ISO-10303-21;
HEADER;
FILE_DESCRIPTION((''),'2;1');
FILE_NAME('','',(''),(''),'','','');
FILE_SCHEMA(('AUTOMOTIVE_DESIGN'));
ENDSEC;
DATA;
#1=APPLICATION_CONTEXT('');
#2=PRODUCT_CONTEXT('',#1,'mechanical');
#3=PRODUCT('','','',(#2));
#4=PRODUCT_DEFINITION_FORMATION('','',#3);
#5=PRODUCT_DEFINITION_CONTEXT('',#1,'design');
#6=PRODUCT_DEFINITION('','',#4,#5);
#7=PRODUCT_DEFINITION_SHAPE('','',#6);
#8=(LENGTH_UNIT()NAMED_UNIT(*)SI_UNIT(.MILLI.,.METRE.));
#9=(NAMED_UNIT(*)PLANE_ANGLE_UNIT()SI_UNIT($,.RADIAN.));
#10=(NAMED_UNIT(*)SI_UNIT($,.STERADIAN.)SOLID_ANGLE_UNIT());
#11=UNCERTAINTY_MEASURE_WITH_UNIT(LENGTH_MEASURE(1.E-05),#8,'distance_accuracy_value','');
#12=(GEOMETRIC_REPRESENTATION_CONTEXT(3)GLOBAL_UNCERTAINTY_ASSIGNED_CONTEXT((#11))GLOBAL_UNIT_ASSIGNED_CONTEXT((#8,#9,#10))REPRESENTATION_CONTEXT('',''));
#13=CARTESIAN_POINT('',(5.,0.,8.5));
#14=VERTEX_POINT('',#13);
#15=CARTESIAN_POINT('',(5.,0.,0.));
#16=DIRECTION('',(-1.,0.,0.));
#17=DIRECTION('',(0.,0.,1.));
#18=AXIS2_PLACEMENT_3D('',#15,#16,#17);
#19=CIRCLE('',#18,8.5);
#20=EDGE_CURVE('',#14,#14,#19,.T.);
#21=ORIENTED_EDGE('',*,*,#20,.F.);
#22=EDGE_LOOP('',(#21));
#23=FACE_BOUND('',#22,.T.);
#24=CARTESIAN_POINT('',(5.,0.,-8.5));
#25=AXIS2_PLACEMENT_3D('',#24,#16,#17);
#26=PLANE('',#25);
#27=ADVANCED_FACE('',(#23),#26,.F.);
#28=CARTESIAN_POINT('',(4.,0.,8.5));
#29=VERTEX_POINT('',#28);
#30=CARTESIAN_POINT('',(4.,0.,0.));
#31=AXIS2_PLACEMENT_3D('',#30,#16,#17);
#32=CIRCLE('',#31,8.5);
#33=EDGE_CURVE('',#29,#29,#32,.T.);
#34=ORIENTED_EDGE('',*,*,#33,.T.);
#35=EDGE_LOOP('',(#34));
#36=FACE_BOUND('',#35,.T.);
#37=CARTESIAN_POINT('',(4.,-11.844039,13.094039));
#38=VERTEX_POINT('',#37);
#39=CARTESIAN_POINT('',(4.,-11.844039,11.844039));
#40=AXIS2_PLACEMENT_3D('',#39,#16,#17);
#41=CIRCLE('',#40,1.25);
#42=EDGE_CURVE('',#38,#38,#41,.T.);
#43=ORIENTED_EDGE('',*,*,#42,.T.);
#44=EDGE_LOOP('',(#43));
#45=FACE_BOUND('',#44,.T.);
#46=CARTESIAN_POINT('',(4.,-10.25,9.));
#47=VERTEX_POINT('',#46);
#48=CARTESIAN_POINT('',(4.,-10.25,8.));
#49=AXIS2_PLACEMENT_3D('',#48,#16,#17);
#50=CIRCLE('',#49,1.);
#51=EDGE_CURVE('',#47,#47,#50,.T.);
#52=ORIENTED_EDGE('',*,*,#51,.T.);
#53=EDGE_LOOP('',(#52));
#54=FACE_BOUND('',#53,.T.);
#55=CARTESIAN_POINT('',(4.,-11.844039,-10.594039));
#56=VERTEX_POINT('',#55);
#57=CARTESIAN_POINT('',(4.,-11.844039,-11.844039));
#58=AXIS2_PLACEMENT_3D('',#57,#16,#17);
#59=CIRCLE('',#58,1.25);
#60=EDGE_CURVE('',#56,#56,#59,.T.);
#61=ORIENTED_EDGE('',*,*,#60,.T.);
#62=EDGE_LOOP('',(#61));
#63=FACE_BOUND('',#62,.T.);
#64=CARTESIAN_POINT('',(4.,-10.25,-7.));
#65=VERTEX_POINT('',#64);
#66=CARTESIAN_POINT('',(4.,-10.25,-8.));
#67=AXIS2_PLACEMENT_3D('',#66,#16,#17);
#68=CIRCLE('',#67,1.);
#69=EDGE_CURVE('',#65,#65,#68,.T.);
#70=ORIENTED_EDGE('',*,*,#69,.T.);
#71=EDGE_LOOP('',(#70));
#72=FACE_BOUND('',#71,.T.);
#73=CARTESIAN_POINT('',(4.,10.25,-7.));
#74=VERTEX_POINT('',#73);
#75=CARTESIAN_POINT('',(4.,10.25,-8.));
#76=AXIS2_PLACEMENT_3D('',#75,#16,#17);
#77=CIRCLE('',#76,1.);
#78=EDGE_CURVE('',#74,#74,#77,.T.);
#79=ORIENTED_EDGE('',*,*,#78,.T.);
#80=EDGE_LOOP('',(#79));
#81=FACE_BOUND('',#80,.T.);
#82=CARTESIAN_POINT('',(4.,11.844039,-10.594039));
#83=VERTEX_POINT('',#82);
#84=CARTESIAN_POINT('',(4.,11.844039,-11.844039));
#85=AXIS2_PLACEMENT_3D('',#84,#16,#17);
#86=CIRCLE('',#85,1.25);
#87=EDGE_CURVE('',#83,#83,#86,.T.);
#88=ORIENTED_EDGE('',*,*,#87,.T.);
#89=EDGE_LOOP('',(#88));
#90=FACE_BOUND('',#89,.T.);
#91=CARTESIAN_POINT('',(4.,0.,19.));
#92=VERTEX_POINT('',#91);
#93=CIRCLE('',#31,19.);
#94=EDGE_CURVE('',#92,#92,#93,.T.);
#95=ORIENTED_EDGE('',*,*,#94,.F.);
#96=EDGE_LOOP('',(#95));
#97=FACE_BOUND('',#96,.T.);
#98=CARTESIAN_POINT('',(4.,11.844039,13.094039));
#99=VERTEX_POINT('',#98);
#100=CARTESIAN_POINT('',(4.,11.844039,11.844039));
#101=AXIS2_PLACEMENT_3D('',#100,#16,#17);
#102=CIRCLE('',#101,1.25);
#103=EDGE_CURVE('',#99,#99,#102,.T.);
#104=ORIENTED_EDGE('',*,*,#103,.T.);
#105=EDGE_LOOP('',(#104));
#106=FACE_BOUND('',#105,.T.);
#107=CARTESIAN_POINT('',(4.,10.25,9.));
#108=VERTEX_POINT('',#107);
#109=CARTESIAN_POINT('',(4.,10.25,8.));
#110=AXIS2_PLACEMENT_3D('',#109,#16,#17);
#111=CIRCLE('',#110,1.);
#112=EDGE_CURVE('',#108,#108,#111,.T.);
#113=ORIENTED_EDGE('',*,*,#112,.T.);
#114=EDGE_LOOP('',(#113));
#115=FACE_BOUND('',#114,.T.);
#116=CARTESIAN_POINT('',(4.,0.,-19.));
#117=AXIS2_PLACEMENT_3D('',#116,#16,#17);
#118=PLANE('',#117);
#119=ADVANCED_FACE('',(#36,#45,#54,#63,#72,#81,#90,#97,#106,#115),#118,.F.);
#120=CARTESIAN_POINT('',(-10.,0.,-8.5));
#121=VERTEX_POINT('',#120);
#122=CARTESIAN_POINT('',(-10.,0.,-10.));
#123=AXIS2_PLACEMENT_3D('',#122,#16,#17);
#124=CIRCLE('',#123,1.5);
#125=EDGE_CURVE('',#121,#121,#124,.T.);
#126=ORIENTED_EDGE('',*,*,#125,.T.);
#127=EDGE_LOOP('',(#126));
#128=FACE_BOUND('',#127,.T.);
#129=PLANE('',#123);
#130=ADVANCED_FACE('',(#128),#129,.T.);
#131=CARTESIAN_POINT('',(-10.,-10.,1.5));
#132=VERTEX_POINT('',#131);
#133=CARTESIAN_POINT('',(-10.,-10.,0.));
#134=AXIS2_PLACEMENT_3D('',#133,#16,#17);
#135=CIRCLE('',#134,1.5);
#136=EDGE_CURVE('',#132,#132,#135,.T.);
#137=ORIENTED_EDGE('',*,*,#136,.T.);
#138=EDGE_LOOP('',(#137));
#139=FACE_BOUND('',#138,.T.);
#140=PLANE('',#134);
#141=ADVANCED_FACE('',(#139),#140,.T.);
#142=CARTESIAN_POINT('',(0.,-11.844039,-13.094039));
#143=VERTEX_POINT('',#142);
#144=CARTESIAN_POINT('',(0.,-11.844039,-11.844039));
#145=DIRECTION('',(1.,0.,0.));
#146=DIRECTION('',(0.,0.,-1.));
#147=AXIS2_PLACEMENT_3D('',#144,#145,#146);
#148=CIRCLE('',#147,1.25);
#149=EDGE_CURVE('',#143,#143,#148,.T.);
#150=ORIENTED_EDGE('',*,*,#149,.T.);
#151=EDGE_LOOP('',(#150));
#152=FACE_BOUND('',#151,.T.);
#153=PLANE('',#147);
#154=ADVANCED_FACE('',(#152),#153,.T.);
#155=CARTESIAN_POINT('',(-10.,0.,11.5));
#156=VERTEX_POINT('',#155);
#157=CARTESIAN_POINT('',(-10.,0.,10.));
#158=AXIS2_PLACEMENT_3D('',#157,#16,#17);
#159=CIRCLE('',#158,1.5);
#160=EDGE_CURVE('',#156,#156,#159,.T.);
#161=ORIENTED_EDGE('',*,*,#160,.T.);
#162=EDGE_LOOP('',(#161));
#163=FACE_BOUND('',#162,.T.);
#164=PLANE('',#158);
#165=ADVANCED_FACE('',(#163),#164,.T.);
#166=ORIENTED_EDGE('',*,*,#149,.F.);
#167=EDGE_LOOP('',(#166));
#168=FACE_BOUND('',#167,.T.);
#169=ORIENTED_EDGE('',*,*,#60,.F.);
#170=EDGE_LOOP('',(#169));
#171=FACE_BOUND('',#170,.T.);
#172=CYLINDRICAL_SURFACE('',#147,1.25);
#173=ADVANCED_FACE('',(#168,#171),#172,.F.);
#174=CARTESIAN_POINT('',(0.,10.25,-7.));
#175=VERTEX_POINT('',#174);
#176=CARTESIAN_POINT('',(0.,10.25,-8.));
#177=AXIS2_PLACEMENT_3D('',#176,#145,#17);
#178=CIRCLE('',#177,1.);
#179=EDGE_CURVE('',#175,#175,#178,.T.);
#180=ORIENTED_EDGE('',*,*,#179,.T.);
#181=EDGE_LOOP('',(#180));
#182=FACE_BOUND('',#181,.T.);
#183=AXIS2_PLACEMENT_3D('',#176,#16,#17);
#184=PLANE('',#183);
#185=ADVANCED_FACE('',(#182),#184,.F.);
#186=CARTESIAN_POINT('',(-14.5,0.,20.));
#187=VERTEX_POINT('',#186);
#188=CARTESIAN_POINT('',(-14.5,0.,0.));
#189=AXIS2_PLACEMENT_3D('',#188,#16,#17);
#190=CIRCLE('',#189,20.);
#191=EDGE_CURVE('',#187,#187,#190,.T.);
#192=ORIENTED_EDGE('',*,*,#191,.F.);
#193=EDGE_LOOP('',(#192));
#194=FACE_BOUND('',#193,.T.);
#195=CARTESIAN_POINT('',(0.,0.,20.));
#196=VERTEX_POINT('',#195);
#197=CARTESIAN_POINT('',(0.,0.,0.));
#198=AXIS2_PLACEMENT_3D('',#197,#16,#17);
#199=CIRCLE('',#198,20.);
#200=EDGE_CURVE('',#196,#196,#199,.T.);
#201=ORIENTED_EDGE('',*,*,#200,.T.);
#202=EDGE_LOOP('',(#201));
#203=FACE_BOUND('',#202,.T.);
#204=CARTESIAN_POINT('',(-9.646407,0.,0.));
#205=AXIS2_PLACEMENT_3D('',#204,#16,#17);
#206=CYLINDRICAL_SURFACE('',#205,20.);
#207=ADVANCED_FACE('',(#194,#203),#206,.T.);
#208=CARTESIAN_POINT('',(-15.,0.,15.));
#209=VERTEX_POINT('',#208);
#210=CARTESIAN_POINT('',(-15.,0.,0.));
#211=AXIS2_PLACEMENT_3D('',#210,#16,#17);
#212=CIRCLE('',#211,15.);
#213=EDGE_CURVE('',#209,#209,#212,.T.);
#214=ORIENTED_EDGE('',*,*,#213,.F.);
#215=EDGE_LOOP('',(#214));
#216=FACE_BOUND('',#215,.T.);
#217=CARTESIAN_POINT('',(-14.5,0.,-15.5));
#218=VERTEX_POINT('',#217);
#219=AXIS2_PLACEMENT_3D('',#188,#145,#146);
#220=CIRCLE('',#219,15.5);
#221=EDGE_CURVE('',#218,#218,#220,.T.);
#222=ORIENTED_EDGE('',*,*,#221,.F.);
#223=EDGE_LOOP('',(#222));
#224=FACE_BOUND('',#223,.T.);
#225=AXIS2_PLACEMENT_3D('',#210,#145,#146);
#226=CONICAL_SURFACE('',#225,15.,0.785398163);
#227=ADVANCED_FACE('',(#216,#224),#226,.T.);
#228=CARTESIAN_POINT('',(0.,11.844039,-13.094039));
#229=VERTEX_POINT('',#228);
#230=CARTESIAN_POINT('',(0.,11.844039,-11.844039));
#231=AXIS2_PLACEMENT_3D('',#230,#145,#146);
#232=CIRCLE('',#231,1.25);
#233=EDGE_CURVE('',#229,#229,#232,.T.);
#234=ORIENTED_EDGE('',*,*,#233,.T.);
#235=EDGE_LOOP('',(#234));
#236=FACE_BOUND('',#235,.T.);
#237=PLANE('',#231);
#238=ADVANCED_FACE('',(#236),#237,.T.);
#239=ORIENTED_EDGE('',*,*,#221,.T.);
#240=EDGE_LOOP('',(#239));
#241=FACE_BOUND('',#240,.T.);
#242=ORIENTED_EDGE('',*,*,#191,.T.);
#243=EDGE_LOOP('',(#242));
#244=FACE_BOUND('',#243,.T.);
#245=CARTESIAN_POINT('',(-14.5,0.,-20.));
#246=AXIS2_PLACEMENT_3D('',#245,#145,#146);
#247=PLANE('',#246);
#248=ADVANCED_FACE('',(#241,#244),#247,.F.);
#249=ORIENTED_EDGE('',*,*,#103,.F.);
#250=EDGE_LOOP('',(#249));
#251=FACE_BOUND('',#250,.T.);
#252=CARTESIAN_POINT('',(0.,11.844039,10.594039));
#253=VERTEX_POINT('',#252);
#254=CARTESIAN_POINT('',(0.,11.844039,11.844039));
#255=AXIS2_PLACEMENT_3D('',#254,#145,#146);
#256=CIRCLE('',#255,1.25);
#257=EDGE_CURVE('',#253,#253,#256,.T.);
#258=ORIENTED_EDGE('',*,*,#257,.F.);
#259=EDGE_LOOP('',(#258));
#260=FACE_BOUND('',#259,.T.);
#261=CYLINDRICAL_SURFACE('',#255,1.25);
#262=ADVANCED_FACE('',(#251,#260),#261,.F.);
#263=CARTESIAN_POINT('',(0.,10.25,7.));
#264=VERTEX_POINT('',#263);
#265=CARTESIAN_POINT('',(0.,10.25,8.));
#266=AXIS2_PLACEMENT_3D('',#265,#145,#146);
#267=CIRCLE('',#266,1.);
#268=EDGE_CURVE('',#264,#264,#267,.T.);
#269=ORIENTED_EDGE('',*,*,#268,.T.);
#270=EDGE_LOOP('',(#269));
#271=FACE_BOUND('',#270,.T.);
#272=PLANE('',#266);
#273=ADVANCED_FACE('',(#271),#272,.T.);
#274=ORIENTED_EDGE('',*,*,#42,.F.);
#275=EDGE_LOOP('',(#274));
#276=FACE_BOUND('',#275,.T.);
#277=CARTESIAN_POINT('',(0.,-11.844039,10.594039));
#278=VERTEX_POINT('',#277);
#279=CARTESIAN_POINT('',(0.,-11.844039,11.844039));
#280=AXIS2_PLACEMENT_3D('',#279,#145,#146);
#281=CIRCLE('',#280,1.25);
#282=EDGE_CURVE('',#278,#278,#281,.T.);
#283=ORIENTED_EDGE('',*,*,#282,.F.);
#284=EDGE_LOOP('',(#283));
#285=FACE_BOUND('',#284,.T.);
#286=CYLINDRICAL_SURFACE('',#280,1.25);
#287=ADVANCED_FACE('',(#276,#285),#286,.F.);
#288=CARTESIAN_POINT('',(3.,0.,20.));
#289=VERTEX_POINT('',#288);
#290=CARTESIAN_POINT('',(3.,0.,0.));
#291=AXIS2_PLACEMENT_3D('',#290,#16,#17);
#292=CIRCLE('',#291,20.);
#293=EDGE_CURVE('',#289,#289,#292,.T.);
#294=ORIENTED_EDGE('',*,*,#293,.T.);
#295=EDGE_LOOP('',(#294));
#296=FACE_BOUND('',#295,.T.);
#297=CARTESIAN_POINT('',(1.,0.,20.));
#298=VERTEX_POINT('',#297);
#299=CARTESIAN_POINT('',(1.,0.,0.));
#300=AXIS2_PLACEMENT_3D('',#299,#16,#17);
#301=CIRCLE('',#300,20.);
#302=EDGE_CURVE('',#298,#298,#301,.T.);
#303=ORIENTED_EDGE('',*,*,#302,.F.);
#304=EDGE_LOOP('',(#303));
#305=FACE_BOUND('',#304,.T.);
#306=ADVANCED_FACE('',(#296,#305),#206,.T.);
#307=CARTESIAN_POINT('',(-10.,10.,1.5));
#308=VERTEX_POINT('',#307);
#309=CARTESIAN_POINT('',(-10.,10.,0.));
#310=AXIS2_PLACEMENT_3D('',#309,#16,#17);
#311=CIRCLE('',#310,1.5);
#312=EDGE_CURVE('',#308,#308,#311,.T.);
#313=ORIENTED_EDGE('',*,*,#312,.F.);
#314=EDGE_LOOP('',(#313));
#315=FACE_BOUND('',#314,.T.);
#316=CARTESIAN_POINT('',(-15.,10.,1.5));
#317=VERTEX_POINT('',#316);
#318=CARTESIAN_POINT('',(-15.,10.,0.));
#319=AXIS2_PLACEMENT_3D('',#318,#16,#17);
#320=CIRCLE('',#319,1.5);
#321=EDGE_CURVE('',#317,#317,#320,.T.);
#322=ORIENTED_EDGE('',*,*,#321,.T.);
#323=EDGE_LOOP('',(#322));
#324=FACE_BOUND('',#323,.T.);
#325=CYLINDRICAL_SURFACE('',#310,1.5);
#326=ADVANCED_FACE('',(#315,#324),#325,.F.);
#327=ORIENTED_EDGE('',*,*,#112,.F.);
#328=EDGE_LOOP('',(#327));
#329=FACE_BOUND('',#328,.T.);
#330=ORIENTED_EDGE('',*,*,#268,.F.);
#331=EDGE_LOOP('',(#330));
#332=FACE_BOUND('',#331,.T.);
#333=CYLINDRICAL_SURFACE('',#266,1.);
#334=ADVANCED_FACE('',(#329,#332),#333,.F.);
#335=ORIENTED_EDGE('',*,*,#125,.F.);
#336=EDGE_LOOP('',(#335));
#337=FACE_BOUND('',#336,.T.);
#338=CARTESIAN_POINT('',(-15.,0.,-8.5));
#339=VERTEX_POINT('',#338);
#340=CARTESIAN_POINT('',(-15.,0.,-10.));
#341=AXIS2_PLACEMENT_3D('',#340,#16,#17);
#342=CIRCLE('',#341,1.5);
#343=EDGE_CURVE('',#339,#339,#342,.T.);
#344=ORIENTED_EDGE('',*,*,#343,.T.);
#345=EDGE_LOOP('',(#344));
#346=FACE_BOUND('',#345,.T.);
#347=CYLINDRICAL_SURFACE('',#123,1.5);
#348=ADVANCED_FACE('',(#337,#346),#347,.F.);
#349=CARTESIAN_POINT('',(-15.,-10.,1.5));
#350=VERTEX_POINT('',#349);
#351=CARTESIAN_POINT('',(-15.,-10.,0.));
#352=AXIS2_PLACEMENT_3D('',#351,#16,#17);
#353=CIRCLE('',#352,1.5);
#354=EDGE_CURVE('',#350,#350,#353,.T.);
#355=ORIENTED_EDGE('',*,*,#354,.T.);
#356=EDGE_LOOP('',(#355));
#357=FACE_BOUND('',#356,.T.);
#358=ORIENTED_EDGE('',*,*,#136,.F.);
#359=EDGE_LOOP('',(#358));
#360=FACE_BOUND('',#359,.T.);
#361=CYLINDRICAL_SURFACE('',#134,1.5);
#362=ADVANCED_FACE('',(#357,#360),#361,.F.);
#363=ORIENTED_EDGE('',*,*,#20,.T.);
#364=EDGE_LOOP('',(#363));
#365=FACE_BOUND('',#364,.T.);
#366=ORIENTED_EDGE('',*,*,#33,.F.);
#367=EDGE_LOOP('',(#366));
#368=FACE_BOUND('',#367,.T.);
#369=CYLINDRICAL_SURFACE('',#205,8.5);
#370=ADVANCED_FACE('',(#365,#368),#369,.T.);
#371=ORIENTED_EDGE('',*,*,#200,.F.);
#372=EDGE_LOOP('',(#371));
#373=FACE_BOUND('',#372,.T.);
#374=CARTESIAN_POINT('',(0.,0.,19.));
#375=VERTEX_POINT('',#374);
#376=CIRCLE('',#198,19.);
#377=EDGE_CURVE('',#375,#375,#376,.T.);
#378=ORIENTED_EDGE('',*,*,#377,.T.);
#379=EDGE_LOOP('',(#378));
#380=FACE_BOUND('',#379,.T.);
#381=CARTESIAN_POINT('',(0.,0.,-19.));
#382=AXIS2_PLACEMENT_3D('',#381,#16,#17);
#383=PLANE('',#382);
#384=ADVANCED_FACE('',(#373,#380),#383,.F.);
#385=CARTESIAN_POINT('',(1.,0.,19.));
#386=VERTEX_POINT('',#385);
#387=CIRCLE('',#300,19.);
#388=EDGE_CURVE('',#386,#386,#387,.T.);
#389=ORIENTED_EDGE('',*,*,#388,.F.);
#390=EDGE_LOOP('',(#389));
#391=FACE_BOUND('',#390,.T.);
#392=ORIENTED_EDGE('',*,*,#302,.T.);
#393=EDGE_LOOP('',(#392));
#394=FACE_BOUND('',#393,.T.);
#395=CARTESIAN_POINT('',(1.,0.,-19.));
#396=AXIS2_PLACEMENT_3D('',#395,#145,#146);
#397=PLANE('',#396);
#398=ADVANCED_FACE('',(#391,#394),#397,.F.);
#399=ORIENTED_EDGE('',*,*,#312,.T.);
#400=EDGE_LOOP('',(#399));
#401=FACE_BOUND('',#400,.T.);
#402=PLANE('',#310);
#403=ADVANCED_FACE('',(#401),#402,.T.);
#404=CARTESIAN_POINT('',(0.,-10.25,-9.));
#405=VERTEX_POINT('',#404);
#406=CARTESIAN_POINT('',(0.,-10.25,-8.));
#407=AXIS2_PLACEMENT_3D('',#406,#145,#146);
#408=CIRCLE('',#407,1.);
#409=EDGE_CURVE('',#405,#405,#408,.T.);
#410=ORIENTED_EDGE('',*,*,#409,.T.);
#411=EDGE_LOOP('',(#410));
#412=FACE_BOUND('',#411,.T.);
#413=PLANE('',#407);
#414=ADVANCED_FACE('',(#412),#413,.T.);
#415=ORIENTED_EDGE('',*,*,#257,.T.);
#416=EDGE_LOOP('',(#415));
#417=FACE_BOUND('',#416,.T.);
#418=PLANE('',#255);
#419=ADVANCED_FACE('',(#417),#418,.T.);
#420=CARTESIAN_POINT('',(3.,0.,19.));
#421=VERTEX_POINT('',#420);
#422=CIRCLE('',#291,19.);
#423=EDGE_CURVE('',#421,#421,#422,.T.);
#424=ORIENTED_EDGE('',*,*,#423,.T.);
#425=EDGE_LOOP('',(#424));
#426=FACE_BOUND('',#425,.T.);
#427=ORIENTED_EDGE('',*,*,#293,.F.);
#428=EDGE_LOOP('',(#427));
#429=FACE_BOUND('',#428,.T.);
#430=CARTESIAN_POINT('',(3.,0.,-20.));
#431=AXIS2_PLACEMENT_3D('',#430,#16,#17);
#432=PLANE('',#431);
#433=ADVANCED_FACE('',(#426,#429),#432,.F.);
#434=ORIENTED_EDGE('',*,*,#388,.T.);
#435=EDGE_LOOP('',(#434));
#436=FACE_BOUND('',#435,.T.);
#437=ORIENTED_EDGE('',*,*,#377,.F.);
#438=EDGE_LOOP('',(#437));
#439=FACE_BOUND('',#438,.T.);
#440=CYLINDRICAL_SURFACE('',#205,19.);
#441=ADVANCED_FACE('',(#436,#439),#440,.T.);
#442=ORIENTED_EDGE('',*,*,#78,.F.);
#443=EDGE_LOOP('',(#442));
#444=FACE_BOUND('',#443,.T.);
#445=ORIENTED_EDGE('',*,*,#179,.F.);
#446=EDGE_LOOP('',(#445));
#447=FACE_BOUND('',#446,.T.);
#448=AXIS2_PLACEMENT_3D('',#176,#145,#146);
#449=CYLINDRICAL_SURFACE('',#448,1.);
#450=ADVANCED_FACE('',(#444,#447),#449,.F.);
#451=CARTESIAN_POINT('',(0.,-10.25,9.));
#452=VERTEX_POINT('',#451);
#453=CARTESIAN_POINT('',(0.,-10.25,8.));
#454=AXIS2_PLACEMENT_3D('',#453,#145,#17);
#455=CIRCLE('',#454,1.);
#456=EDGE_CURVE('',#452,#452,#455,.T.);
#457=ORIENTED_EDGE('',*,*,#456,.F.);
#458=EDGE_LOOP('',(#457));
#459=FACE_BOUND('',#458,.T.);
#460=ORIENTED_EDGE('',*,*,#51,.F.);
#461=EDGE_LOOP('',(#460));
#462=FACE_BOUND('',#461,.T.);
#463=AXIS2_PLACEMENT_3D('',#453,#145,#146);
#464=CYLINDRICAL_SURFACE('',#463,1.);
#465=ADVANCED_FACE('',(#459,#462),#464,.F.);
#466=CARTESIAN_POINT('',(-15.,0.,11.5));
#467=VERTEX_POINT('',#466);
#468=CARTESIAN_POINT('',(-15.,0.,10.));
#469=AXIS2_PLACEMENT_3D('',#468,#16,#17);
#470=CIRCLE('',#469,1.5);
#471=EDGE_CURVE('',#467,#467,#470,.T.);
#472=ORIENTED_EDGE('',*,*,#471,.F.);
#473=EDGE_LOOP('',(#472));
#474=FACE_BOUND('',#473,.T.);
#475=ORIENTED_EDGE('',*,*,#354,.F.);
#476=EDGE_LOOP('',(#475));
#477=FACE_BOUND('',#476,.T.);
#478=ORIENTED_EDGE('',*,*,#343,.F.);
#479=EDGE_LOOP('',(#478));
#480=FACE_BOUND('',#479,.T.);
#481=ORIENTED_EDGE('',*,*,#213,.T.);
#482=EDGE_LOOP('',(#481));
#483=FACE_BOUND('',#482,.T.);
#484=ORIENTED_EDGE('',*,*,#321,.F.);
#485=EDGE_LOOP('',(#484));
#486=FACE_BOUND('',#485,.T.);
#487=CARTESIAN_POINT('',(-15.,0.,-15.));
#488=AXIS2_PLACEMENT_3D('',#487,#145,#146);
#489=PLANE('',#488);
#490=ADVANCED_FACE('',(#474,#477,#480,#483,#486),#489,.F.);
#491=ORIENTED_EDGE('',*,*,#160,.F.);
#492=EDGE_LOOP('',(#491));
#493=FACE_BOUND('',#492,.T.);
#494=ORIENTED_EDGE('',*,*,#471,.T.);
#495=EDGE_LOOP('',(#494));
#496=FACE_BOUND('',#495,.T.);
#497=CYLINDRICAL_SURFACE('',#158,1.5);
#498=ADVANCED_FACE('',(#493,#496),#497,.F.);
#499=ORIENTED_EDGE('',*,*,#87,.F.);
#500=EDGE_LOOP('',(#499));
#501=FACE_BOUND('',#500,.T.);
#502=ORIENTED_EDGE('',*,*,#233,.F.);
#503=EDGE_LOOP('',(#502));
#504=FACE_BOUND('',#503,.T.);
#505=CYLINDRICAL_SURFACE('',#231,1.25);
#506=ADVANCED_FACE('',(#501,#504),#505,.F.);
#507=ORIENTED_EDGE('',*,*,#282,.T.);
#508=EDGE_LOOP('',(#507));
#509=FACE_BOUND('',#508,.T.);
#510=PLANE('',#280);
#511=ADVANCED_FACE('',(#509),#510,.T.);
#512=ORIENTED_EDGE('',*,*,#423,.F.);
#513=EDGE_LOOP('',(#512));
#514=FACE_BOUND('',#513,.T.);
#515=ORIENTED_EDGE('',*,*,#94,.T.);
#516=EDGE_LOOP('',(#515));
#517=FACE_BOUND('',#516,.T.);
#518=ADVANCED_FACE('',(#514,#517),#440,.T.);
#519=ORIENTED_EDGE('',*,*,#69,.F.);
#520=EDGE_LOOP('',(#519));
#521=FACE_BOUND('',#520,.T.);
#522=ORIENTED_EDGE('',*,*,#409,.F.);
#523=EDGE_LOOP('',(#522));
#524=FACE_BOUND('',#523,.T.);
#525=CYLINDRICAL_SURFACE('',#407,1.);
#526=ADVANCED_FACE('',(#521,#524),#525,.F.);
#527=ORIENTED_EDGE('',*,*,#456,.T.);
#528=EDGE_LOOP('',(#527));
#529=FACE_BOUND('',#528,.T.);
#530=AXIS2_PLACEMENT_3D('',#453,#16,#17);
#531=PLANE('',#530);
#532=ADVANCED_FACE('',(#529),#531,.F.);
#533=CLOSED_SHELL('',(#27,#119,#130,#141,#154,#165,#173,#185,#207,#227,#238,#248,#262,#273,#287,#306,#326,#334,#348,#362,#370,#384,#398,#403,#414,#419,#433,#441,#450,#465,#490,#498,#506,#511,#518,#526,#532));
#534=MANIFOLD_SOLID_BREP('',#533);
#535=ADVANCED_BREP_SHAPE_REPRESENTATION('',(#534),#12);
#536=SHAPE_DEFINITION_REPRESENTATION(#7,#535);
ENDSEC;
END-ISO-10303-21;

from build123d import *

# Parameters (mm, degrees)
CHAMFER_1_SIZE      = 0.5
SKETCH_2_R          = 1.5
CUT_EXTRUDE_1_DEPTH = 5
SKETCH_3_R          = 1
SKETCH_3_R_2        = 1.25
CUT_EXTRUDE_2_DEPTH = 5


with BuildPart() as part:
    # 草图1 → 旋转1 (revolve)
    with BuildSketch(Plane(origin=(0, 0, 0), x_dir=(1, 0, 0), z_dir=(0, 1, 0)), mode=Mode.PRIVATE) as revolve_1_sk:
        Polygon((0, 19), (1, 19), (1, 20), (3, 20), (3, 19), (4, 19), (4, 8.5), (5, 8.5), (5, 0), (0, 0), (-15, 0), (-15, 15), (-14.5, 15), (-14.5, 20), (0, 20), align=None)
    revolve(revolve_1_sk.sketch.rotate(Axis((-9.646406884, 0, 0), (1, 0, 0)), 180), axis=Axis((-9.646406884, 0, 0), (1, 0, 0)))

    # 倒角1
    chamfer_1_edges = [part.edges().sort_by_distance(p)[0] for p in [
        (-14.5, 0, -15),
    ]]
    chamfer(chamfer_1_edges, length=CHAMFER_1_SIZE - 0.0001)  # a hair under: the kernel refuses the full size

    # 草图2 → 切除-拉伸1 (cut)
    with BuildSketch(Plane.ZY.offset(15)):
        with Locations((0, 10)):
            Circle(SKETCH_2_R)
        with Locations((10, 0)):
            Circle(SKETCH_2_R)
        with Locations((0, -10)):
            Circle(SKETCH_2_R)
        with Locations((-10, 0)):
            Circle(SKETCH_2_R)
    extrude(amount=-CUT_EXTRUDE_1_DEPTH, mode=Mode.SUBTRACT)

    # 草图3 → 切除-拉伸2 (cut)
    with BuildSketch(Plane(origin=(5, 0, 0), x_dir=(0, 0, -1), z_dir=(1, 0, 0))):
        with Locations((-8, 10.25)):
            Circle(SKETCH_3_R)
        with Locations(Location((8, 10.25, 0), (0, 0, 180))):
            Circle(SKETCH_3_R)
        with Locations((8, -10.25)):
            Circle(SKETCH_3_R)
        with Locations(Location((-8, -10.25, 0), (0, 0, 180))):
            Circle(SKETCH_3_R)
        with Locations((-11.844038585, 11.844038585)):
            Circle(SKETCH_3_R_2)
        with Locations((11.844038585, 11.844038585)):
            Circle(SKETCH_3_R_2)
        with Locations((11.844038585, -11.844038585)):
            Circle(SKETCH_3_R_2)
        with Locations((-11.844038585, -11.844038585)):
            Circle(SKETCH_3_R_2)
    extrude(amount=-CUT_EXTRUDE_2_DEPTH, mode=Mode.SUBTRACT)


solid = part.part
